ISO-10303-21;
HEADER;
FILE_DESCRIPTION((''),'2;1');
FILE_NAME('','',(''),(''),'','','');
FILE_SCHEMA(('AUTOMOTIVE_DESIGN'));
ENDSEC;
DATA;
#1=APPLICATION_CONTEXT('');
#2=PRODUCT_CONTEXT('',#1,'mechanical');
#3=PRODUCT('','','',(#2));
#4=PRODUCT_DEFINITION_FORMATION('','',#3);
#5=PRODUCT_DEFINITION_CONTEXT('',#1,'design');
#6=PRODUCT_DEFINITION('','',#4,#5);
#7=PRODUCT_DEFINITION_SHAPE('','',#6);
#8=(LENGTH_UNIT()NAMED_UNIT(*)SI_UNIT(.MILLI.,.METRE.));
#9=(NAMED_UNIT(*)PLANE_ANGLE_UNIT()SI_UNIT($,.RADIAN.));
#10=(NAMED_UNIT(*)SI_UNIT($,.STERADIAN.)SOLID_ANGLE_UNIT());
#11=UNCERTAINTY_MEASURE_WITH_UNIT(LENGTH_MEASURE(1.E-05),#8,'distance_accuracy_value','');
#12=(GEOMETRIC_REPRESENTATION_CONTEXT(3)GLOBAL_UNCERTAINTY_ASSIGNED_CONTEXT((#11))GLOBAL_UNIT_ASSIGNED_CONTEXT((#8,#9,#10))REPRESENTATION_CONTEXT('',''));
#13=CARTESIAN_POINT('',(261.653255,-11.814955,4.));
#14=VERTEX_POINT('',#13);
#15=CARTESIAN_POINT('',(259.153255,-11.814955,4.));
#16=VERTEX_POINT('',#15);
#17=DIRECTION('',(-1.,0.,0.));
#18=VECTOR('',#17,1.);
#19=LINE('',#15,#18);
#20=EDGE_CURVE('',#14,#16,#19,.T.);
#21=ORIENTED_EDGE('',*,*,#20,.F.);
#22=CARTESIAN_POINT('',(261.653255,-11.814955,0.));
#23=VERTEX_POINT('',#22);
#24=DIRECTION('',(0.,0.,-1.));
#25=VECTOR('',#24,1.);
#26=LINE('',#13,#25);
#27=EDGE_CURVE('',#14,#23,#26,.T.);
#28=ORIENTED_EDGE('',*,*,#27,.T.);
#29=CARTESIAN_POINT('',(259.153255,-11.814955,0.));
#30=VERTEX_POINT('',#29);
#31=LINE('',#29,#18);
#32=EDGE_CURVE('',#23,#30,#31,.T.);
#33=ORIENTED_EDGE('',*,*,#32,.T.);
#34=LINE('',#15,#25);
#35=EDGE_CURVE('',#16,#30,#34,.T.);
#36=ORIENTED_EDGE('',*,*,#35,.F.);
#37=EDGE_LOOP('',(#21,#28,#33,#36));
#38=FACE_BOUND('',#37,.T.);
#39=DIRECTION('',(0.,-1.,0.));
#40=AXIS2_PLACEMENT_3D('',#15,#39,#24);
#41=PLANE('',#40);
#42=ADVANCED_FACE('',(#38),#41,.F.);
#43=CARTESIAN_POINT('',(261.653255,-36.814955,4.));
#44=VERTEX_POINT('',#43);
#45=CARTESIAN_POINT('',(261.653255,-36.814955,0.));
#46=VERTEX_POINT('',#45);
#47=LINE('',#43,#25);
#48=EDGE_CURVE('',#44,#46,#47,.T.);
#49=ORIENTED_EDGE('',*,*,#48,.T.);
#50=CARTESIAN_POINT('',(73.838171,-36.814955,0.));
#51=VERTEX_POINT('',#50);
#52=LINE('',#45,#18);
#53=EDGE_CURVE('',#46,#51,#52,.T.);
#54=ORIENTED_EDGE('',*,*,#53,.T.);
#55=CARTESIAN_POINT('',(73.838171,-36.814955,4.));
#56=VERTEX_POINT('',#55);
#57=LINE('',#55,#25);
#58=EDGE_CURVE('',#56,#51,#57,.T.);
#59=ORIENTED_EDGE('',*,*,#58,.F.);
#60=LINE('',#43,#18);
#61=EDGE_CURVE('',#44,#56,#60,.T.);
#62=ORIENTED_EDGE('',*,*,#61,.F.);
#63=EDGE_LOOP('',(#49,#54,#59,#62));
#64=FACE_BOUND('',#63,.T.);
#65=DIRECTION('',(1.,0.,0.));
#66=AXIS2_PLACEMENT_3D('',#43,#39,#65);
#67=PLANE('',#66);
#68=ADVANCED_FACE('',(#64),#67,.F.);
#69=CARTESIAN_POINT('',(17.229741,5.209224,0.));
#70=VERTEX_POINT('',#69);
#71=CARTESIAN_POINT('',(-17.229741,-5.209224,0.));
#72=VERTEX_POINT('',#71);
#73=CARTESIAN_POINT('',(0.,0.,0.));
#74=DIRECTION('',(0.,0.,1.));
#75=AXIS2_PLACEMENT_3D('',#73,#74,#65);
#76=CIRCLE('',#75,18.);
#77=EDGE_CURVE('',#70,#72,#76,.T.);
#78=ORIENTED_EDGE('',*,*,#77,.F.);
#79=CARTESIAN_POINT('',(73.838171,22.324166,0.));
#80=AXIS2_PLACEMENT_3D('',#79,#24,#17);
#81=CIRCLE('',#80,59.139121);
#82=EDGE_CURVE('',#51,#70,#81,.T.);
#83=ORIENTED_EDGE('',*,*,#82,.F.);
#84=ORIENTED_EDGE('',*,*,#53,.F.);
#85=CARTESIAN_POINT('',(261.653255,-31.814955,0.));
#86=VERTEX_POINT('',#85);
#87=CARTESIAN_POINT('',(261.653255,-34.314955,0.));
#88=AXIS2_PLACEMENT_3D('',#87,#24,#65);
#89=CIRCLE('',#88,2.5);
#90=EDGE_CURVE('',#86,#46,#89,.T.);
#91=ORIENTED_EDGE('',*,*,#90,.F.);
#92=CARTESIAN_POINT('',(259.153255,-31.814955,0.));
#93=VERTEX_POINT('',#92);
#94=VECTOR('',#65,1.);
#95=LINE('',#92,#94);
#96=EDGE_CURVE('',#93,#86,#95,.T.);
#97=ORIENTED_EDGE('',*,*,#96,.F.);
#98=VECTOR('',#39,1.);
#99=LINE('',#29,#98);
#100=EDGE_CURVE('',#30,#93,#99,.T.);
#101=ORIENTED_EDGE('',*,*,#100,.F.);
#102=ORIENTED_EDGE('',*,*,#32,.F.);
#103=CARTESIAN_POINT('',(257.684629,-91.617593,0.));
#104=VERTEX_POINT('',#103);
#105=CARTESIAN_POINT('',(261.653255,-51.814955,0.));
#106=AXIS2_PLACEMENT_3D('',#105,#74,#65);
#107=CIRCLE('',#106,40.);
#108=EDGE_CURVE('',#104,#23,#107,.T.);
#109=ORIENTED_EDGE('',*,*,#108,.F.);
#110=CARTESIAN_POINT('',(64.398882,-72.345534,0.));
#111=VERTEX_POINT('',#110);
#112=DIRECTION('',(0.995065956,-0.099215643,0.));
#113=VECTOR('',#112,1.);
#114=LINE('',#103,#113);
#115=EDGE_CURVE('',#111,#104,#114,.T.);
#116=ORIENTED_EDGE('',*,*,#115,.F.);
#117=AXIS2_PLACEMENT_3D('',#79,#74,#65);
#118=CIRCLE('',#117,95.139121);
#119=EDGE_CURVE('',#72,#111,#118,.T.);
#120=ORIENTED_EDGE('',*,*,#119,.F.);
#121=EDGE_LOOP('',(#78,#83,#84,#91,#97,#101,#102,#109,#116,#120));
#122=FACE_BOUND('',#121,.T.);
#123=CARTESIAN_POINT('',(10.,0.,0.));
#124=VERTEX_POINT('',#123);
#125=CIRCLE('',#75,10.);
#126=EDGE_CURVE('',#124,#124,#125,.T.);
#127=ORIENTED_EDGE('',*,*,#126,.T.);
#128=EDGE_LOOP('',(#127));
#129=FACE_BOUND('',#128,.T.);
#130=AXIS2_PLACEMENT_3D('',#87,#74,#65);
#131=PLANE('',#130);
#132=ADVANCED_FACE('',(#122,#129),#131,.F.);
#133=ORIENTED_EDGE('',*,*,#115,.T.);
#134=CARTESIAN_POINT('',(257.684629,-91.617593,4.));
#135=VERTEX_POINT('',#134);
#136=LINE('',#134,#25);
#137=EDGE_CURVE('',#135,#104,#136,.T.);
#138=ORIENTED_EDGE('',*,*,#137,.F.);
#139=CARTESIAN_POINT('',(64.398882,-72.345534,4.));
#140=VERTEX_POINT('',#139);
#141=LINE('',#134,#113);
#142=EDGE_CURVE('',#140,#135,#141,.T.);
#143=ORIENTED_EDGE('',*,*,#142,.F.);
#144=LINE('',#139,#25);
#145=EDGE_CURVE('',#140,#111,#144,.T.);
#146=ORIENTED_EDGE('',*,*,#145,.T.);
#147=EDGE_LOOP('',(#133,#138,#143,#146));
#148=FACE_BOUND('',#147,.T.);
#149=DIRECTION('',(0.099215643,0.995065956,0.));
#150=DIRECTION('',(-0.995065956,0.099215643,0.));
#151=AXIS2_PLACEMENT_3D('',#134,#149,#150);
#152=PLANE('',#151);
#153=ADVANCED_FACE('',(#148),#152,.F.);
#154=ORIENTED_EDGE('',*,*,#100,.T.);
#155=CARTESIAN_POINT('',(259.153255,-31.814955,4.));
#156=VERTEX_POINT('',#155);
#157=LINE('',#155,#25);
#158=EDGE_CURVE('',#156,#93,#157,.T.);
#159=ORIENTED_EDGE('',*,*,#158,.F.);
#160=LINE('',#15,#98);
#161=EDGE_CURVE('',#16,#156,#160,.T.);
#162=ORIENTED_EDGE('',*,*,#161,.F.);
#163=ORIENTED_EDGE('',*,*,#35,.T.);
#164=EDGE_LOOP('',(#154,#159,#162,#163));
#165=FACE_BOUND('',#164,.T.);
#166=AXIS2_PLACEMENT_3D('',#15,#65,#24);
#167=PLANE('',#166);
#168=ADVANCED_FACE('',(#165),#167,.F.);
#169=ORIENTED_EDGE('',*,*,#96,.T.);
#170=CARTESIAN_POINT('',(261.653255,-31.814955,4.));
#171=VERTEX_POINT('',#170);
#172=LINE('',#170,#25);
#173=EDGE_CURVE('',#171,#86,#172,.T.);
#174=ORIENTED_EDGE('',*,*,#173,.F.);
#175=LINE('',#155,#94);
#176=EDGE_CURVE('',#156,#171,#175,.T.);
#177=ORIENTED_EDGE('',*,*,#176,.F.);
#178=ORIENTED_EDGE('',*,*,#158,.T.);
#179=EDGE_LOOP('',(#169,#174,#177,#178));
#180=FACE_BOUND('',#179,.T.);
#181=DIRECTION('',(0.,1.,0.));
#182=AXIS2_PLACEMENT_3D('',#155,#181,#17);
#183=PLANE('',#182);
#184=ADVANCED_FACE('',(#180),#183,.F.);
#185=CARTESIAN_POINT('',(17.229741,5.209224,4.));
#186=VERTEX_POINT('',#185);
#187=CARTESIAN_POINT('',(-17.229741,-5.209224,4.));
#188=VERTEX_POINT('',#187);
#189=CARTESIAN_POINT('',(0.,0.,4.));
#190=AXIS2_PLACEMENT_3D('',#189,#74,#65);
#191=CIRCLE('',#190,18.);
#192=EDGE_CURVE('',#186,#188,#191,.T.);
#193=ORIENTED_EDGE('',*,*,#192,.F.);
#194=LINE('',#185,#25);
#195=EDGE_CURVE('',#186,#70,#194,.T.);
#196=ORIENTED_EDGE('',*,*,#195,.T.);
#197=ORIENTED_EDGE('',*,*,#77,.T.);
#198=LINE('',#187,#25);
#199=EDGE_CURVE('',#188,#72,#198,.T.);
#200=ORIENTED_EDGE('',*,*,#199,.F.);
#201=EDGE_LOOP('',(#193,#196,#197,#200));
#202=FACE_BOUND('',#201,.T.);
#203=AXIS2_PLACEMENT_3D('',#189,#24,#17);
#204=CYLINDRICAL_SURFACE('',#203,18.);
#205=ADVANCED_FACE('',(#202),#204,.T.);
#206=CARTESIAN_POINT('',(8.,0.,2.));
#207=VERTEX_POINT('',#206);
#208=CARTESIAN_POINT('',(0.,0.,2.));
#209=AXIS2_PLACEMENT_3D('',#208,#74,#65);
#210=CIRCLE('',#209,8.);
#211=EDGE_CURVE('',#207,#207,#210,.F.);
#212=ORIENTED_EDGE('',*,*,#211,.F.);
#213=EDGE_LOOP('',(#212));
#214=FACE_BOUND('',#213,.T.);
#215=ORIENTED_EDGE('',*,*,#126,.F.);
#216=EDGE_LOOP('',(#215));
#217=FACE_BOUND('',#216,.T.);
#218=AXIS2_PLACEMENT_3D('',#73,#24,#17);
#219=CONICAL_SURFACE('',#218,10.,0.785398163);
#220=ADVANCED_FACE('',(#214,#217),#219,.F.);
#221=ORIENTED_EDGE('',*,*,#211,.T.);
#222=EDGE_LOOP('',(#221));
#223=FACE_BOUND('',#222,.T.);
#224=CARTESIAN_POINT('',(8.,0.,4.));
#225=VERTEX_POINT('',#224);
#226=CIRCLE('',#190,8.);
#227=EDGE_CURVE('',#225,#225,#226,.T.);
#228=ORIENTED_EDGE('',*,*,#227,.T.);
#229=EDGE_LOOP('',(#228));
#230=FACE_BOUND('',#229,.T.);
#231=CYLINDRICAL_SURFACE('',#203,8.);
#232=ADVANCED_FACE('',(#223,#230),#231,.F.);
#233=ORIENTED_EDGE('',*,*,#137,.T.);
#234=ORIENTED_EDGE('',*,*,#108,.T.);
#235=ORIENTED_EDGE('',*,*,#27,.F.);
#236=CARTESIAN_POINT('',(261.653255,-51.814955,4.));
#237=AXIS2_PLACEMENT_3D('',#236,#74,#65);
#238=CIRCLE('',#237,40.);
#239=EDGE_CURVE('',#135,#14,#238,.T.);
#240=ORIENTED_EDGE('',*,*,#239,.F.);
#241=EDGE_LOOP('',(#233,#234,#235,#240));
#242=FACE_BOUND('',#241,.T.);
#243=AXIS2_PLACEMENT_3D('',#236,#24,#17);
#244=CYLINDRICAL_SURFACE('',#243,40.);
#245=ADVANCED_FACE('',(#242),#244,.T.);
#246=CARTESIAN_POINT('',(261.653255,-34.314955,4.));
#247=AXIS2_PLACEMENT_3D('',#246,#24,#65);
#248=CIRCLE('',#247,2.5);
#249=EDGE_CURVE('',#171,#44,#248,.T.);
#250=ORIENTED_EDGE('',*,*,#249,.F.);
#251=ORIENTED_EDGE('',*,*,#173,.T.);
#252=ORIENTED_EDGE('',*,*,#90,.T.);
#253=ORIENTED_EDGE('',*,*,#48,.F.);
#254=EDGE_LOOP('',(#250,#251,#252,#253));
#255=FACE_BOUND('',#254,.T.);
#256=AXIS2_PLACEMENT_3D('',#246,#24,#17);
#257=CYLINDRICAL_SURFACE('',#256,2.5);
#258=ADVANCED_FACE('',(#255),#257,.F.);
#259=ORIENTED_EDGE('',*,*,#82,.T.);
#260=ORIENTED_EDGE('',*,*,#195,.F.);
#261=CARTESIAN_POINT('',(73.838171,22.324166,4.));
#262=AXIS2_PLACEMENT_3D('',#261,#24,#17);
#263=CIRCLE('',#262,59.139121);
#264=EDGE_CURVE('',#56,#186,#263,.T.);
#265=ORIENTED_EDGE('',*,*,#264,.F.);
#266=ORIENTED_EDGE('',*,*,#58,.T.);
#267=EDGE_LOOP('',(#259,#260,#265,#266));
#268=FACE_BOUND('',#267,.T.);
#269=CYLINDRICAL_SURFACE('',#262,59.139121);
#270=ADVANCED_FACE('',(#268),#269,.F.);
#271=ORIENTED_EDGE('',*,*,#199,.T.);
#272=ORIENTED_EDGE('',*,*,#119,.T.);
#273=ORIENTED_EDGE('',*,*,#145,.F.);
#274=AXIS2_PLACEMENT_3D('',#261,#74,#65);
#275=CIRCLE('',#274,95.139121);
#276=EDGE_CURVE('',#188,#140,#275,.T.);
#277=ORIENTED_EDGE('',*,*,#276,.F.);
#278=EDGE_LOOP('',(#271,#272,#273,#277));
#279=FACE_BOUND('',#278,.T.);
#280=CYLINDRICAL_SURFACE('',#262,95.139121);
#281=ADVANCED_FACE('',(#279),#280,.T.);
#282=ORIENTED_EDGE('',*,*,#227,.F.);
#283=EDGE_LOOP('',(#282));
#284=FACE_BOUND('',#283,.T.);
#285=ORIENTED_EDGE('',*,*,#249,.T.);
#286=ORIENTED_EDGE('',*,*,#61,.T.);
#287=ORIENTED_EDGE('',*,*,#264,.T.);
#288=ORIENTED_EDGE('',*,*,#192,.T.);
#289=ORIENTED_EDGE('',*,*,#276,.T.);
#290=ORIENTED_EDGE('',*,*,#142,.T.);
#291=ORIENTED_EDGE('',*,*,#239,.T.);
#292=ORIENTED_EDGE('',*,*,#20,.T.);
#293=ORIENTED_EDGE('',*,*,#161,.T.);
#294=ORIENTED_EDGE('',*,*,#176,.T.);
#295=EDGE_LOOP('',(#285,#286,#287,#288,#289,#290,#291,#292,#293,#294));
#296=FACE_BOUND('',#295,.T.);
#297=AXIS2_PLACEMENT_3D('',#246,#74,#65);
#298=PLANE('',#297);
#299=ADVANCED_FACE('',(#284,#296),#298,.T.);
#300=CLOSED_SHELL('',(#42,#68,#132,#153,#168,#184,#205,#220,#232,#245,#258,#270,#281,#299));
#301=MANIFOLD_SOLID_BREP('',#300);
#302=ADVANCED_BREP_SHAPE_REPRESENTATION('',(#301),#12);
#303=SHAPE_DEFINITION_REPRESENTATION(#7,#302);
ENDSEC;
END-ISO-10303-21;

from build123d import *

# Parameters (mm, degrees)
SKETCH_1_R             = 8
SM_BASE_FLANGE_1_DEPTH = 4
CHAMFER_2_SIZE         = 2


# Sheet-metal steps are written as plain solids
with BuildPart() as part:
    # Sketch 1 → Базовая кромка1 (new body)
    with BuildSketch(Plane.XY):
        with BuildLine():
            Line((259.153254995, -11.814954576), (261.653254995, -11.814954576))
            ThreePointArc((261.653254995, -11.814954576), (301.603884083, -53.801719646), (257.684629276, -91.617592804))
            Line((257.684629276, -91.617592804), (64.398882219, -72.345533941))
            ThreePointArc((64.398882219, -72.345533941), (13.404361157, -51.155129463), (-17.229741187, -5.209224379))
            ThreePointArc((-17.229741187, -5.209224379), (-5.209224379, 17.229741187), (17.229741187, 5.209224379))
            ThreePointArc((17.229741187, 5.209224379), (38.587121714, -25.160558799), (73.838171235, -36.814954576))
            Line((73.838171235, -36.814954576), (261.653254995, -36.814954576))
            ThreePointArc((261.653254995, -36.814954576), (264.153254995, -34.314954576), (261.653254995, -31.814954576))
            Line((261.653254995, -31.814954576), (259.153254995, -31.814954576))
            Line((259.153254995, -31.814954576), (259.153254995, -11.814954576))
        make_face()
        Circle(SKETCH_1_R, mode=Mode.SUBTRACT)
    extrude(amount=SM_BASE_FLANGE_1_DEPTH)

    # Фаска2
    chamfer_2_edges = [part.edges().sort_by_distance(p)[0] for p in [
        (-8, 0, 0),
    ]]
    chamfer(chamfer_2_edges, length=CHAMFER_2_SIZE)


solid = part.part
